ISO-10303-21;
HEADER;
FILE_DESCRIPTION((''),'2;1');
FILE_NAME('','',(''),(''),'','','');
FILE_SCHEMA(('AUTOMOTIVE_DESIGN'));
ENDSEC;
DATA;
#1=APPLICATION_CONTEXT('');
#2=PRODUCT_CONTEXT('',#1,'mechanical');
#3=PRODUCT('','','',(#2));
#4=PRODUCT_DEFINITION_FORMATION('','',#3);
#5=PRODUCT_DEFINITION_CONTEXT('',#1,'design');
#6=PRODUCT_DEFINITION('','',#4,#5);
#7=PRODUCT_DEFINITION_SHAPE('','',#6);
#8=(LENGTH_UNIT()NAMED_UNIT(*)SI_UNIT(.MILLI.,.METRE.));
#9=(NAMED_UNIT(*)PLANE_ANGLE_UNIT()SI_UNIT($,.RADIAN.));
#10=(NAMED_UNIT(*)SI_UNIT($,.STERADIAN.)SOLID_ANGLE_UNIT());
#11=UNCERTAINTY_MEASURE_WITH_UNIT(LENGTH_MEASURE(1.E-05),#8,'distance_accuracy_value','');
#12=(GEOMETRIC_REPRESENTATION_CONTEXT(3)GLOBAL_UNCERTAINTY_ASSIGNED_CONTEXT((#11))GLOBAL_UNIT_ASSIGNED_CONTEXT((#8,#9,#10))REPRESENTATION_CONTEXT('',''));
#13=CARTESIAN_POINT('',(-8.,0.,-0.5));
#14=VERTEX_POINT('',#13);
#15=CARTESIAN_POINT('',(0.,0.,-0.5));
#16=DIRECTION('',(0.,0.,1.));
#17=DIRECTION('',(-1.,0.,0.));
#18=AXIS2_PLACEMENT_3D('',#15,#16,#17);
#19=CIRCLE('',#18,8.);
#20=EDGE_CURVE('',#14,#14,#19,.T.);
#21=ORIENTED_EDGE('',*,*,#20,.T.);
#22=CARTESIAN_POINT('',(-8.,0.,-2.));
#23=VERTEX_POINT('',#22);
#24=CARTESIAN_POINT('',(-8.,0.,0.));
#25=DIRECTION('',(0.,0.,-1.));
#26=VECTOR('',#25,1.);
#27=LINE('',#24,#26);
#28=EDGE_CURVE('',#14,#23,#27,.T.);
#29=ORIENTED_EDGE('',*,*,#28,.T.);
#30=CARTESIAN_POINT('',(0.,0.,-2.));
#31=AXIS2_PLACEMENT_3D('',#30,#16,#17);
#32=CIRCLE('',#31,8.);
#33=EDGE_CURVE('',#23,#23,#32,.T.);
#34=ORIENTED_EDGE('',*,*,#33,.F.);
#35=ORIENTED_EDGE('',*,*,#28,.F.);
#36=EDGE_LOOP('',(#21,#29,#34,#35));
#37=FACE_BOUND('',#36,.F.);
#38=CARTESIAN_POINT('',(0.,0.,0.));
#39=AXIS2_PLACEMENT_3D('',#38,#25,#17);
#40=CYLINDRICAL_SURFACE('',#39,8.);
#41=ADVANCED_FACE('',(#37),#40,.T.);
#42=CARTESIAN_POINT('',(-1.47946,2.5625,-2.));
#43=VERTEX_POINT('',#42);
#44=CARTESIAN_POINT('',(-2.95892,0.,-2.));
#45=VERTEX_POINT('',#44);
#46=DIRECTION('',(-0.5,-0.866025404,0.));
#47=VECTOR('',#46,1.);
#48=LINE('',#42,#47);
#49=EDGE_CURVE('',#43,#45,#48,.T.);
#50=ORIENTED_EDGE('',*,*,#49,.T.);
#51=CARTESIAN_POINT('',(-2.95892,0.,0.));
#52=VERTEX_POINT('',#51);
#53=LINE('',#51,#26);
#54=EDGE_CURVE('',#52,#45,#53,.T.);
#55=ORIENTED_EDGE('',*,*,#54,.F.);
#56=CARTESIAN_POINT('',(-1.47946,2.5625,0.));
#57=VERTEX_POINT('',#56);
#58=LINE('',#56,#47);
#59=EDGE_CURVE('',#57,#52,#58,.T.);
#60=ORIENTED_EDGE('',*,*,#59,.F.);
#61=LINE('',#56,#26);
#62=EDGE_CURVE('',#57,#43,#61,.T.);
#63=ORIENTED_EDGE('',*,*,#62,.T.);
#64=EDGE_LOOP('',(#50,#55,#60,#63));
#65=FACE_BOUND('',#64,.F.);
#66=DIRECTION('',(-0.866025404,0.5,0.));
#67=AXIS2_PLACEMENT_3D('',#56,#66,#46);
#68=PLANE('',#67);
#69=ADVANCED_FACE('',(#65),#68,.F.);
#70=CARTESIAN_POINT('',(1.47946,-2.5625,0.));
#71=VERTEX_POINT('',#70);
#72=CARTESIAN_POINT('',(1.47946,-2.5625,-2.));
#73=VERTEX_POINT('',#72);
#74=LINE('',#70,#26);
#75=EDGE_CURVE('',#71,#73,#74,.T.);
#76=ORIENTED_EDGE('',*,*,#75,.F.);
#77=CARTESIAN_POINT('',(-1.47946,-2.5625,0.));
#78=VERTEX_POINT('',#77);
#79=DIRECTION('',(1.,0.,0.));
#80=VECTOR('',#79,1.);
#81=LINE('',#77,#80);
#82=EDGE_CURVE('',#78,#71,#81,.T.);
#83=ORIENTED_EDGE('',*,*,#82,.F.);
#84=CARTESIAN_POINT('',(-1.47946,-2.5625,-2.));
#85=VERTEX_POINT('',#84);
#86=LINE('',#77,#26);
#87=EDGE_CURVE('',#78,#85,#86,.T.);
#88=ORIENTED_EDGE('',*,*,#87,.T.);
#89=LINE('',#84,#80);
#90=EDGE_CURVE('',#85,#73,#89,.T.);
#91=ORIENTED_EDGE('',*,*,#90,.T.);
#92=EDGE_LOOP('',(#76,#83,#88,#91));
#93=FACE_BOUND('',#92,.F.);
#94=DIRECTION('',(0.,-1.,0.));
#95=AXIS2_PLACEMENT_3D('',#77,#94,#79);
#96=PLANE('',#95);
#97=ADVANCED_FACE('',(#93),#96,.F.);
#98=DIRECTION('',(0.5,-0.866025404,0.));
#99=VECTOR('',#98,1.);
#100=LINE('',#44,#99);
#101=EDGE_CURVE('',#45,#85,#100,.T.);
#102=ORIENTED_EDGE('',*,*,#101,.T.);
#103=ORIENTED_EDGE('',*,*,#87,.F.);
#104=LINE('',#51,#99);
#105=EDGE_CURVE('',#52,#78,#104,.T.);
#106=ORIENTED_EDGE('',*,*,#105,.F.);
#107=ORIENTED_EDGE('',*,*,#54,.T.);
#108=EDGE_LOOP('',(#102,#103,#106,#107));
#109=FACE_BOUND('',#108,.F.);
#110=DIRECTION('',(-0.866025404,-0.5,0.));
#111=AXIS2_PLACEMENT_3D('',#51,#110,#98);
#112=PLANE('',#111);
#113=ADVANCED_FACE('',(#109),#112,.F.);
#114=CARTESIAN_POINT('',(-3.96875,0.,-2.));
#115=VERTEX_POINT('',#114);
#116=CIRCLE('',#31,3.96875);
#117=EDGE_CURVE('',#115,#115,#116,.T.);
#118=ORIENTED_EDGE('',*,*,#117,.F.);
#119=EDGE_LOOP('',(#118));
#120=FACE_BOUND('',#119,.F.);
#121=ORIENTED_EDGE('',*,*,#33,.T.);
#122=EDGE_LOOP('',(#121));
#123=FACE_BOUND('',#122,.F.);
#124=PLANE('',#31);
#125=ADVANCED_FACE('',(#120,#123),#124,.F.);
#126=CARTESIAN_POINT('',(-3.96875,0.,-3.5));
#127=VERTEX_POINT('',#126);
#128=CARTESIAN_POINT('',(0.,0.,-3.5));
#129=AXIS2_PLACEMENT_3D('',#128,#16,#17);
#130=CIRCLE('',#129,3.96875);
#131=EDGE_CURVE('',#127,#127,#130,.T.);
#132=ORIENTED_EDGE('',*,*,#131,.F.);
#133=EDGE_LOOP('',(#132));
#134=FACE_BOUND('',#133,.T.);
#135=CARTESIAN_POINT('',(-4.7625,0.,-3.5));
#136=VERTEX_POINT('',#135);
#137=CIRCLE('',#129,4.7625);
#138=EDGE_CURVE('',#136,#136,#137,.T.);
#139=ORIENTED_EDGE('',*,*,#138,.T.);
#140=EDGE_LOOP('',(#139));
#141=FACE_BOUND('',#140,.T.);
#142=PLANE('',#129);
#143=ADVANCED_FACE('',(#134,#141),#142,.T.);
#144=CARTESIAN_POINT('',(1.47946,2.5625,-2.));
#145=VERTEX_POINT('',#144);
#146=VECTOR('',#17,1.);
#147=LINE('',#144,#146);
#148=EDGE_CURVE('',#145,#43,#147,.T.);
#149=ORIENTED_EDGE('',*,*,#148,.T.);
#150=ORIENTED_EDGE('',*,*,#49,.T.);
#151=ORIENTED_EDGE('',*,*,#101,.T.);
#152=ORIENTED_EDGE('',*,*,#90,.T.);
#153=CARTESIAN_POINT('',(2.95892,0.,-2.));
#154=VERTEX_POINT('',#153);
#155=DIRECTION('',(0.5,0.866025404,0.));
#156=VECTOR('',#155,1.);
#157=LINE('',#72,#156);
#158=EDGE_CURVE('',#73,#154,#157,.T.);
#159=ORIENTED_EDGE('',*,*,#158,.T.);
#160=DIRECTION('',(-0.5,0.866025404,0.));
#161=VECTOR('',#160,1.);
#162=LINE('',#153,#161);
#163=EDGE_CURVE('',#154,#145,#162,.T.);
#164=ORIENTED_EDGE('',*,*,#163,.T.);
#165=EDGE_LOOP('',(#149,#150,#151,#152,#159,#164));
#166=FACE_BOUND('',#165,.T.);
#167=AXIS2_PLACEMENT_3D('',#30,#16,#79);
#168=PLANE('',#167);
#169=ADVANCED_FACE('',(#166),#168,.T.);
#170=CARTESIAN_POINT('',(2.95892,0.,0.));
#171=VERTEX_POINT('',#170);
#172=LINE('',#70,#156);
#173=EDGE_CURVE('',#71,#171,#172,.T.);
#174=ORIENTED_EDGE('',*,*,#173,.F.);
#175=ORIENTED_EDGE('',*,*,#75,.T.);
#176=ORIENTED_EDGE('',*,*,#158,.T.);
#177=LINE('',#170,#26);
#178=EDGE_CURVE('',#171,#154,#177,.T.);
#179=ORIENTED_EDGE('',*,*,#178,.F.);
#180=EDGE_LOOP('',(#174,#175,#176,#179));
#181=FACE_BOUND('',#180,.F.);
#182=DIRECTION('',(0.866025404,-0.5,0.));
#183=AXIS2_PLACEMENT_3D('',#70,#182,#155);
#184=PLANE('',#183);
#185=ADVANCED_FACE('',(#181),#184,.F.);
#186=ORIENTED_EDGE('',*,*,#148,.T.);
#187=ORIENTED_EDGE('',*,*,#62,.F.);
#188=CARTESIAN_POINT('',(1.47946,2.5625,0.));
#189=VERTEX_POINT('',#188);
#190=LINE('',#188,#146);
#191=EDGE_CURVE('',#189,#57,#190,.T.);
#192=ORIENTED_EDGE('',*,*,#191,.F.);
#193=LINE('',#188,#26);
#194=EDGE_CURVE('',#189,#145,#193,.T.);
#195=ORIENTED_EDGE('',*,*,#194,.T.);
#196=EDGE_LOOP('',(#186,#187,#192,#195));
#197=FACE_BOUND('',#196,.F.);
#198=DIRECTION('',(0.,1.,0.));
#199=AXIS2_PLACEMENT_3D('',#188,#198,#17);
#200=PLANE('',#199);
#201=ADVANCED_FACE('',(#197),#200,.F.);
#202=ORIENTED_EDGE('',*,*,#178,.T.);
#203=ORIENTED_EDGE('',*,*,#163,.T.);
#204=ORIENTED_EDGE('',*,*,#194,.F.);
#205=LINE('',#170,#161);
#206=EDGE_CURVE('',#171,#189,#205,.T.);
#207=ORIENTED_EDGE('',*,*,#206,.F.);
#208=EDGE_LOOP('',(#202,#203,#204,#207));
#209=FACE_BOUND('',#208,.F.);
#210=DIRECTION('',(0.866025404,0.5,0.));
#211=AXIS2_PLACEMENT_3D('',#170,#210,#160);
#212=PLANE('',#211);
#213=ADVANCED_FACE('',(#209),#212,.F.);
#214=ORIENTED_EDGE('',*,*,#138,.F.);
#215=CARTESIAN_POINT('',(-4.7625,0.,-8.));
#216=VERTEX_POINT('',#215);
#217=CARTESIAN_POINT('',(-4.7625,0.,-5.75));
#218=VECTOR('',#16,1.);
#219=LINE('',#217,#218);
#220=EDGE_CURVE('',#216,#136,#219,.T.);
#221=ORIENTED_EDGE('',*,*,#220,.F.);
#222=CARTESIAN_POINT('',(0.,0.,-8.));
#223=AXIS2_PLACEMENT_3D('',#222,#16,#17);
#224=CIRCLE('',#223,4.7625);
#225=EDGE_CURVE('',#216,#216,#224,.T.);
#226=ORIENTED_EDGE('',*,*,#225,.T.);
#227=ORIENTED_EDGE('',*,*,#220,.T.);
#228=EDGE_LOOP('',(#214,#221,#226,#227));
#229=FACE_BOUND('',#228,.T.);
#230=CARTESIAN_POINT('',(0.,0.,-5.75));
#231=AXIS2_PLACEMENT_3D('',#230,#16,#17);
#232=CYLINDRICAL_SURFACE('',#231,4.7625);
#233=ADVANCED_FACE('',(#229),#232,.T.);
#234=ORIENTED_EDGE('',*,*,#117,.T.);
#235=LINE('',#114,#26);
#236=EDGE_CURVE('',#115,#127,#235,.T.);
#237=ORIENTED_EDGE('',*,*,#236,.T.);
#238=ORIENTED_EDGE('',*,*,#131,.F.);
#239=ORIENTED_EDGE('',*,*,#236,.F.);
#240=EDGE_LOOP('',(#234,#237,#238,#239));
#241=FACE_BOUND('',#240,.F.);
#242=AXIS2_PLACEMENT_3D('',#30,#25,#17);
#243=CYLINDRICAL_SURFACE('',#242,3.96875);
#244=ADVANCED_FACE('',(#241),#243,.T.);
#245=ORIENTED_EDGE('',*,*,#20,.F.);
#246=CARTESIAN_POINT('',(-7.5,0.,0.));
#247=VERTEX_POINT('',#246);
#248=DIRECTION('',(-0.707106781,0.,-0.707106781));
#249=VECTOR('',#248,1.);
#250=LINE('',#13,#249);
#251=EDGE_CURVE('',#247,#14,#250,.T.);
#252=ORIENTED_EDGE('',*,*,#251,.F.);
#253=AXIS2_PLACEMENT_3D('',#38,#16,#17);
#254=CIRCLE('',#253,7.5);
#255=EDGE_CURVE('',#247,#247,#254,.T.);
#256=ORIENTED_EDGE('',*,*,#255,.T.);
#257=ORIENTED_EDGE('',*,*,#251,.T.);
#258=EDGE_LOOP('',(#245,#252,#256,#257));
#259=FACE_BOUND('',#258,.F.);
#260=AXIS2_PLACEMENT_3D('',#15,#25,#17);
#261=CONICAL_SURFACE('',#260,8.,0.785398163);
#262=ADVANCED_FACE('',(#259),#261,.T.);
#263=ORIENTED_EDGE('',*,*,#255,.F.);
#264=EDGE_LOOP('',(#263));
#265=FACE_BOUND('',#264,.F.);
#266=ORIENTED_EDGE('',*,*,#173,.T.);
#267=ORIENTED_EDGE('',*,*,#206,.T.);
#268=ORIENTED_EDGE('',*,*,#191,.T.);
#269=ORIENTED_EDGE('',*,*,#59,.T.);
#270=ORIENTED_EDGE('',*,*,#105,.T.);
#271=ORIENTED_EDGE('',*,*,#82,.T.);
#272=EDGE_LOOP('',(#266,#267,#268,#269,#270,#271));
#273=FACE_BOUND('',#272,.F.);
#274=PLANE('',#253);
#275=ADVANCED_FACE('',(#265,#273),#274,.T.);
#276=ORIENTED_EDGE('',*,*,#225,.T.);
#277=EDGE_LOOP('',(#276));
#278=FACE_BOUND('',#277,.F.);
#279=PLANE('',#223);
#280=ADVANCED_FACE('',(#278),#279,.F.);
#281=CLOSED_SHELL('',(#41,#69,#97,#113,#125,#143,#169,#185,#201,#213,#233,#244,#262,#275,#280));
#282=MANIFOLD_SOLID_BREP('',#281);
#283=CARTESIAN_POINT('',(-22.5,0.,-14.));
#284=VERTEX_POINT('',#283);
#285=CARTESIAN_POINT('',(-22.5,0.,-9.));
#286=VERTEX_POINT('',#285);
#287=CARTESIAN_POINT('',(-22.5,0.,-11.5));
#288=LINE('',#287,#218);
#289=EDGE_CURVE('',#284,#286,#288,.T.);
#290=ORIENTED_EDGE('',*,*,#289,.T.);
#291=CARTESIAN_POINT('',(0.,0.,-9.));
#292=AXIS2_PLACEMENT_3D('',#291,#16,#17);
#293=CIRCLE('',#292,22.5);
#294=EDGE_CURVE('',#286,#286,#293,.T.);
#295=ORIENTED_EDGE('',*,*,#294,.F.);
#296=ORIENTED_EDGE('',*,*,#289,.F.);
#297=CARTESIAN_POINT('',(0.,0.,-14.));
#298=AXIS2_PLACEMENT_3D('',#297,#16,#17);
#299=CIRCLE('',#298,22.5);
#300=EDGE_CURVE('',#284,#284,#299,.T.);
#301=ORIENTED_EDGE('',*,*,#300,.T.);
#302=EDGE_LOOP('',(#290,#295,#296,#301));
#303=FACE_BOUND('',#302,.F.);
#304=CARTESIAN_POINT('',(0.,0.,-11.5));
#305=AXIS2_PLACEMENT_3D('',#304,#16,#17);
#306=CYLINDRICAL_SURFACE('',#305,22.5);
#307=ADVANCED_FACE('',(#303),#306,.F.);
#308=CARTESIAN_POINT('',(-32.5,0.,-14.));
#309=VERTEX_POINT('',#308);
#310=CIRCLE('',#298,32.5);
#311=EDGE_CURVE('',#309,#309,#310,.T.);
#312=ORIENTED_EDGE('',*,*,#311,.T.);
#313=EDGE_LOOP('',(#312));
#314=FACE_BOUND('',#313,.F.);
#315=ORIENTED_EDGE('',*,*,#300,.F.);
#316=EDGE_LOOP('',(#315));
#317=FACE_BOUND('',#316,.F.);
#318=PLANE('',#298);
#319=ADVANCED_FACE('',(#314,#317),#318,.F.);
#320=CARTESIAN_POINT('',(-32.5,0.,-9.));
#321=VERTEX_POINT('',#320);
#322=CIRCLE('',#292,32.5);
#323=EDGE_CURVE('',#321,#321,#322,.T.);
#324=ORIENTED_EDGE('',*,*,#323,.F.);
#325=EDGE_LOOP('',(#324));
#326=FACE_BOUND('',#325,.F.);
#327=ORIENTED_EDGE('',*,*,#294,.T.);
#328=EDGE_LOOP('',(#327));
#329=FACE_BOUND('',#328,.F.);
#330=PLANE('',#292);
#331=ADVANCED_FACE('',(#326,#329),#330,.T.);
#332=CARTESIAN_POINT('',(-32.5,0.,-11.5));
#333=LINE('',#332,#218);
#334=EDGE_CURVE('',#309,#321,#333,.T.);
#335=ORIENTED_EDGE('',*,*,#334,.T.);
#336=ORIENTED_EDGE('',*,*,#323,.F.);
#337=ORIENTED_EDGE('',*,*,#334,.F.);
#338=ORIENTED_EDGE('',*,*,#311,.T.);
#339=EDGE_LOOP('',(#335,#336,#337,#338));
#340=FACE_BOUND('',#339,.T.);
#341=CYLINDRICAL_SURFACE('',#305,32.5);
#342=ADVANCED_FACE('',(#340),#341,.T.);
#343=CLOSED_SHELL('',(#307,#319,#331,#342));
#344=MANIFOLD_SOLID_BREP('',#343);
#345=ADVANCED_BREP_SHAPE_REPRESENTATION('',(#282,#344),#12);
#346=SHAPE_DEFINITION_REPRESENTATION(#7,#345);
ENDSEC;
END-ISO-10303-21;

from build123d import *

# Parameters (mm, degrees)
F0_W     = 0.79375
F0_H     = 4.5
F3_DEPTH = 2
F4_SIZE  = 0.5
F0_W_2   = 7.754
F0_H_2   = 5
F0_W_3   = 2.246


# Not quite as in the source:
# - a feature of the source that left no trace in its solid (it failed there, or was rolled back) is left out


with BuildPart() as f1:
    # F0 (on Front) → F1 (revolve)
    with BuildSketch(Plane.XZ):
        Polygon((-3.96875, -3.5), (-3.96875, -8), (0, -8), (0, 0), (-8, 0), (-8, -2), (-6, -2), (-3.96875, -2), (-3.96875, -2.5), align=None)
        with Locations((-4.365625, -5.75)):
            Rectangle(F0_W, F0_H)
    revolve(axis=Axis((0, 0, -5.6257829033), (0, 0, 1)))

    # F2 (on face) → F3 (cut)
    with BuildSketch(Plane.XY):
        Polygon((1.4794600648, 2.5625), (-1.4794600648, 2.5625), (-2.9589201296, 0), (-1.4794600648, -2.5625), (1.4794600648, -2.5625), (2.9589201296, 0), align=None)
    extrude(amount=-F3_DEPTH, mode=Mode.SUBTRACT)

    # F4
    f4_edges = [f1.edges().sort_by_distance(p)[0] for p in [
        (8, 0, 0),
    ]]
    chamfer(f4_edges, length=F4_SIZE)


with BuildPart() as f6:
    # F0 (on Front) → F6 (revolve)
    with BuildSketch(Plane.XZ):
        with Locations((-26.377, -11.5)):
            Rectangle(F0_W_2, F0_H_2)
        with Locations((-31.377, -11.5)):
            Rectangle(F0_W_3, F0_H_2)
    revolve(axis=Axis((0, 0, -5.6257829033), (0, 0, 1)))


solid = Compound([f1.part, f6.part])
